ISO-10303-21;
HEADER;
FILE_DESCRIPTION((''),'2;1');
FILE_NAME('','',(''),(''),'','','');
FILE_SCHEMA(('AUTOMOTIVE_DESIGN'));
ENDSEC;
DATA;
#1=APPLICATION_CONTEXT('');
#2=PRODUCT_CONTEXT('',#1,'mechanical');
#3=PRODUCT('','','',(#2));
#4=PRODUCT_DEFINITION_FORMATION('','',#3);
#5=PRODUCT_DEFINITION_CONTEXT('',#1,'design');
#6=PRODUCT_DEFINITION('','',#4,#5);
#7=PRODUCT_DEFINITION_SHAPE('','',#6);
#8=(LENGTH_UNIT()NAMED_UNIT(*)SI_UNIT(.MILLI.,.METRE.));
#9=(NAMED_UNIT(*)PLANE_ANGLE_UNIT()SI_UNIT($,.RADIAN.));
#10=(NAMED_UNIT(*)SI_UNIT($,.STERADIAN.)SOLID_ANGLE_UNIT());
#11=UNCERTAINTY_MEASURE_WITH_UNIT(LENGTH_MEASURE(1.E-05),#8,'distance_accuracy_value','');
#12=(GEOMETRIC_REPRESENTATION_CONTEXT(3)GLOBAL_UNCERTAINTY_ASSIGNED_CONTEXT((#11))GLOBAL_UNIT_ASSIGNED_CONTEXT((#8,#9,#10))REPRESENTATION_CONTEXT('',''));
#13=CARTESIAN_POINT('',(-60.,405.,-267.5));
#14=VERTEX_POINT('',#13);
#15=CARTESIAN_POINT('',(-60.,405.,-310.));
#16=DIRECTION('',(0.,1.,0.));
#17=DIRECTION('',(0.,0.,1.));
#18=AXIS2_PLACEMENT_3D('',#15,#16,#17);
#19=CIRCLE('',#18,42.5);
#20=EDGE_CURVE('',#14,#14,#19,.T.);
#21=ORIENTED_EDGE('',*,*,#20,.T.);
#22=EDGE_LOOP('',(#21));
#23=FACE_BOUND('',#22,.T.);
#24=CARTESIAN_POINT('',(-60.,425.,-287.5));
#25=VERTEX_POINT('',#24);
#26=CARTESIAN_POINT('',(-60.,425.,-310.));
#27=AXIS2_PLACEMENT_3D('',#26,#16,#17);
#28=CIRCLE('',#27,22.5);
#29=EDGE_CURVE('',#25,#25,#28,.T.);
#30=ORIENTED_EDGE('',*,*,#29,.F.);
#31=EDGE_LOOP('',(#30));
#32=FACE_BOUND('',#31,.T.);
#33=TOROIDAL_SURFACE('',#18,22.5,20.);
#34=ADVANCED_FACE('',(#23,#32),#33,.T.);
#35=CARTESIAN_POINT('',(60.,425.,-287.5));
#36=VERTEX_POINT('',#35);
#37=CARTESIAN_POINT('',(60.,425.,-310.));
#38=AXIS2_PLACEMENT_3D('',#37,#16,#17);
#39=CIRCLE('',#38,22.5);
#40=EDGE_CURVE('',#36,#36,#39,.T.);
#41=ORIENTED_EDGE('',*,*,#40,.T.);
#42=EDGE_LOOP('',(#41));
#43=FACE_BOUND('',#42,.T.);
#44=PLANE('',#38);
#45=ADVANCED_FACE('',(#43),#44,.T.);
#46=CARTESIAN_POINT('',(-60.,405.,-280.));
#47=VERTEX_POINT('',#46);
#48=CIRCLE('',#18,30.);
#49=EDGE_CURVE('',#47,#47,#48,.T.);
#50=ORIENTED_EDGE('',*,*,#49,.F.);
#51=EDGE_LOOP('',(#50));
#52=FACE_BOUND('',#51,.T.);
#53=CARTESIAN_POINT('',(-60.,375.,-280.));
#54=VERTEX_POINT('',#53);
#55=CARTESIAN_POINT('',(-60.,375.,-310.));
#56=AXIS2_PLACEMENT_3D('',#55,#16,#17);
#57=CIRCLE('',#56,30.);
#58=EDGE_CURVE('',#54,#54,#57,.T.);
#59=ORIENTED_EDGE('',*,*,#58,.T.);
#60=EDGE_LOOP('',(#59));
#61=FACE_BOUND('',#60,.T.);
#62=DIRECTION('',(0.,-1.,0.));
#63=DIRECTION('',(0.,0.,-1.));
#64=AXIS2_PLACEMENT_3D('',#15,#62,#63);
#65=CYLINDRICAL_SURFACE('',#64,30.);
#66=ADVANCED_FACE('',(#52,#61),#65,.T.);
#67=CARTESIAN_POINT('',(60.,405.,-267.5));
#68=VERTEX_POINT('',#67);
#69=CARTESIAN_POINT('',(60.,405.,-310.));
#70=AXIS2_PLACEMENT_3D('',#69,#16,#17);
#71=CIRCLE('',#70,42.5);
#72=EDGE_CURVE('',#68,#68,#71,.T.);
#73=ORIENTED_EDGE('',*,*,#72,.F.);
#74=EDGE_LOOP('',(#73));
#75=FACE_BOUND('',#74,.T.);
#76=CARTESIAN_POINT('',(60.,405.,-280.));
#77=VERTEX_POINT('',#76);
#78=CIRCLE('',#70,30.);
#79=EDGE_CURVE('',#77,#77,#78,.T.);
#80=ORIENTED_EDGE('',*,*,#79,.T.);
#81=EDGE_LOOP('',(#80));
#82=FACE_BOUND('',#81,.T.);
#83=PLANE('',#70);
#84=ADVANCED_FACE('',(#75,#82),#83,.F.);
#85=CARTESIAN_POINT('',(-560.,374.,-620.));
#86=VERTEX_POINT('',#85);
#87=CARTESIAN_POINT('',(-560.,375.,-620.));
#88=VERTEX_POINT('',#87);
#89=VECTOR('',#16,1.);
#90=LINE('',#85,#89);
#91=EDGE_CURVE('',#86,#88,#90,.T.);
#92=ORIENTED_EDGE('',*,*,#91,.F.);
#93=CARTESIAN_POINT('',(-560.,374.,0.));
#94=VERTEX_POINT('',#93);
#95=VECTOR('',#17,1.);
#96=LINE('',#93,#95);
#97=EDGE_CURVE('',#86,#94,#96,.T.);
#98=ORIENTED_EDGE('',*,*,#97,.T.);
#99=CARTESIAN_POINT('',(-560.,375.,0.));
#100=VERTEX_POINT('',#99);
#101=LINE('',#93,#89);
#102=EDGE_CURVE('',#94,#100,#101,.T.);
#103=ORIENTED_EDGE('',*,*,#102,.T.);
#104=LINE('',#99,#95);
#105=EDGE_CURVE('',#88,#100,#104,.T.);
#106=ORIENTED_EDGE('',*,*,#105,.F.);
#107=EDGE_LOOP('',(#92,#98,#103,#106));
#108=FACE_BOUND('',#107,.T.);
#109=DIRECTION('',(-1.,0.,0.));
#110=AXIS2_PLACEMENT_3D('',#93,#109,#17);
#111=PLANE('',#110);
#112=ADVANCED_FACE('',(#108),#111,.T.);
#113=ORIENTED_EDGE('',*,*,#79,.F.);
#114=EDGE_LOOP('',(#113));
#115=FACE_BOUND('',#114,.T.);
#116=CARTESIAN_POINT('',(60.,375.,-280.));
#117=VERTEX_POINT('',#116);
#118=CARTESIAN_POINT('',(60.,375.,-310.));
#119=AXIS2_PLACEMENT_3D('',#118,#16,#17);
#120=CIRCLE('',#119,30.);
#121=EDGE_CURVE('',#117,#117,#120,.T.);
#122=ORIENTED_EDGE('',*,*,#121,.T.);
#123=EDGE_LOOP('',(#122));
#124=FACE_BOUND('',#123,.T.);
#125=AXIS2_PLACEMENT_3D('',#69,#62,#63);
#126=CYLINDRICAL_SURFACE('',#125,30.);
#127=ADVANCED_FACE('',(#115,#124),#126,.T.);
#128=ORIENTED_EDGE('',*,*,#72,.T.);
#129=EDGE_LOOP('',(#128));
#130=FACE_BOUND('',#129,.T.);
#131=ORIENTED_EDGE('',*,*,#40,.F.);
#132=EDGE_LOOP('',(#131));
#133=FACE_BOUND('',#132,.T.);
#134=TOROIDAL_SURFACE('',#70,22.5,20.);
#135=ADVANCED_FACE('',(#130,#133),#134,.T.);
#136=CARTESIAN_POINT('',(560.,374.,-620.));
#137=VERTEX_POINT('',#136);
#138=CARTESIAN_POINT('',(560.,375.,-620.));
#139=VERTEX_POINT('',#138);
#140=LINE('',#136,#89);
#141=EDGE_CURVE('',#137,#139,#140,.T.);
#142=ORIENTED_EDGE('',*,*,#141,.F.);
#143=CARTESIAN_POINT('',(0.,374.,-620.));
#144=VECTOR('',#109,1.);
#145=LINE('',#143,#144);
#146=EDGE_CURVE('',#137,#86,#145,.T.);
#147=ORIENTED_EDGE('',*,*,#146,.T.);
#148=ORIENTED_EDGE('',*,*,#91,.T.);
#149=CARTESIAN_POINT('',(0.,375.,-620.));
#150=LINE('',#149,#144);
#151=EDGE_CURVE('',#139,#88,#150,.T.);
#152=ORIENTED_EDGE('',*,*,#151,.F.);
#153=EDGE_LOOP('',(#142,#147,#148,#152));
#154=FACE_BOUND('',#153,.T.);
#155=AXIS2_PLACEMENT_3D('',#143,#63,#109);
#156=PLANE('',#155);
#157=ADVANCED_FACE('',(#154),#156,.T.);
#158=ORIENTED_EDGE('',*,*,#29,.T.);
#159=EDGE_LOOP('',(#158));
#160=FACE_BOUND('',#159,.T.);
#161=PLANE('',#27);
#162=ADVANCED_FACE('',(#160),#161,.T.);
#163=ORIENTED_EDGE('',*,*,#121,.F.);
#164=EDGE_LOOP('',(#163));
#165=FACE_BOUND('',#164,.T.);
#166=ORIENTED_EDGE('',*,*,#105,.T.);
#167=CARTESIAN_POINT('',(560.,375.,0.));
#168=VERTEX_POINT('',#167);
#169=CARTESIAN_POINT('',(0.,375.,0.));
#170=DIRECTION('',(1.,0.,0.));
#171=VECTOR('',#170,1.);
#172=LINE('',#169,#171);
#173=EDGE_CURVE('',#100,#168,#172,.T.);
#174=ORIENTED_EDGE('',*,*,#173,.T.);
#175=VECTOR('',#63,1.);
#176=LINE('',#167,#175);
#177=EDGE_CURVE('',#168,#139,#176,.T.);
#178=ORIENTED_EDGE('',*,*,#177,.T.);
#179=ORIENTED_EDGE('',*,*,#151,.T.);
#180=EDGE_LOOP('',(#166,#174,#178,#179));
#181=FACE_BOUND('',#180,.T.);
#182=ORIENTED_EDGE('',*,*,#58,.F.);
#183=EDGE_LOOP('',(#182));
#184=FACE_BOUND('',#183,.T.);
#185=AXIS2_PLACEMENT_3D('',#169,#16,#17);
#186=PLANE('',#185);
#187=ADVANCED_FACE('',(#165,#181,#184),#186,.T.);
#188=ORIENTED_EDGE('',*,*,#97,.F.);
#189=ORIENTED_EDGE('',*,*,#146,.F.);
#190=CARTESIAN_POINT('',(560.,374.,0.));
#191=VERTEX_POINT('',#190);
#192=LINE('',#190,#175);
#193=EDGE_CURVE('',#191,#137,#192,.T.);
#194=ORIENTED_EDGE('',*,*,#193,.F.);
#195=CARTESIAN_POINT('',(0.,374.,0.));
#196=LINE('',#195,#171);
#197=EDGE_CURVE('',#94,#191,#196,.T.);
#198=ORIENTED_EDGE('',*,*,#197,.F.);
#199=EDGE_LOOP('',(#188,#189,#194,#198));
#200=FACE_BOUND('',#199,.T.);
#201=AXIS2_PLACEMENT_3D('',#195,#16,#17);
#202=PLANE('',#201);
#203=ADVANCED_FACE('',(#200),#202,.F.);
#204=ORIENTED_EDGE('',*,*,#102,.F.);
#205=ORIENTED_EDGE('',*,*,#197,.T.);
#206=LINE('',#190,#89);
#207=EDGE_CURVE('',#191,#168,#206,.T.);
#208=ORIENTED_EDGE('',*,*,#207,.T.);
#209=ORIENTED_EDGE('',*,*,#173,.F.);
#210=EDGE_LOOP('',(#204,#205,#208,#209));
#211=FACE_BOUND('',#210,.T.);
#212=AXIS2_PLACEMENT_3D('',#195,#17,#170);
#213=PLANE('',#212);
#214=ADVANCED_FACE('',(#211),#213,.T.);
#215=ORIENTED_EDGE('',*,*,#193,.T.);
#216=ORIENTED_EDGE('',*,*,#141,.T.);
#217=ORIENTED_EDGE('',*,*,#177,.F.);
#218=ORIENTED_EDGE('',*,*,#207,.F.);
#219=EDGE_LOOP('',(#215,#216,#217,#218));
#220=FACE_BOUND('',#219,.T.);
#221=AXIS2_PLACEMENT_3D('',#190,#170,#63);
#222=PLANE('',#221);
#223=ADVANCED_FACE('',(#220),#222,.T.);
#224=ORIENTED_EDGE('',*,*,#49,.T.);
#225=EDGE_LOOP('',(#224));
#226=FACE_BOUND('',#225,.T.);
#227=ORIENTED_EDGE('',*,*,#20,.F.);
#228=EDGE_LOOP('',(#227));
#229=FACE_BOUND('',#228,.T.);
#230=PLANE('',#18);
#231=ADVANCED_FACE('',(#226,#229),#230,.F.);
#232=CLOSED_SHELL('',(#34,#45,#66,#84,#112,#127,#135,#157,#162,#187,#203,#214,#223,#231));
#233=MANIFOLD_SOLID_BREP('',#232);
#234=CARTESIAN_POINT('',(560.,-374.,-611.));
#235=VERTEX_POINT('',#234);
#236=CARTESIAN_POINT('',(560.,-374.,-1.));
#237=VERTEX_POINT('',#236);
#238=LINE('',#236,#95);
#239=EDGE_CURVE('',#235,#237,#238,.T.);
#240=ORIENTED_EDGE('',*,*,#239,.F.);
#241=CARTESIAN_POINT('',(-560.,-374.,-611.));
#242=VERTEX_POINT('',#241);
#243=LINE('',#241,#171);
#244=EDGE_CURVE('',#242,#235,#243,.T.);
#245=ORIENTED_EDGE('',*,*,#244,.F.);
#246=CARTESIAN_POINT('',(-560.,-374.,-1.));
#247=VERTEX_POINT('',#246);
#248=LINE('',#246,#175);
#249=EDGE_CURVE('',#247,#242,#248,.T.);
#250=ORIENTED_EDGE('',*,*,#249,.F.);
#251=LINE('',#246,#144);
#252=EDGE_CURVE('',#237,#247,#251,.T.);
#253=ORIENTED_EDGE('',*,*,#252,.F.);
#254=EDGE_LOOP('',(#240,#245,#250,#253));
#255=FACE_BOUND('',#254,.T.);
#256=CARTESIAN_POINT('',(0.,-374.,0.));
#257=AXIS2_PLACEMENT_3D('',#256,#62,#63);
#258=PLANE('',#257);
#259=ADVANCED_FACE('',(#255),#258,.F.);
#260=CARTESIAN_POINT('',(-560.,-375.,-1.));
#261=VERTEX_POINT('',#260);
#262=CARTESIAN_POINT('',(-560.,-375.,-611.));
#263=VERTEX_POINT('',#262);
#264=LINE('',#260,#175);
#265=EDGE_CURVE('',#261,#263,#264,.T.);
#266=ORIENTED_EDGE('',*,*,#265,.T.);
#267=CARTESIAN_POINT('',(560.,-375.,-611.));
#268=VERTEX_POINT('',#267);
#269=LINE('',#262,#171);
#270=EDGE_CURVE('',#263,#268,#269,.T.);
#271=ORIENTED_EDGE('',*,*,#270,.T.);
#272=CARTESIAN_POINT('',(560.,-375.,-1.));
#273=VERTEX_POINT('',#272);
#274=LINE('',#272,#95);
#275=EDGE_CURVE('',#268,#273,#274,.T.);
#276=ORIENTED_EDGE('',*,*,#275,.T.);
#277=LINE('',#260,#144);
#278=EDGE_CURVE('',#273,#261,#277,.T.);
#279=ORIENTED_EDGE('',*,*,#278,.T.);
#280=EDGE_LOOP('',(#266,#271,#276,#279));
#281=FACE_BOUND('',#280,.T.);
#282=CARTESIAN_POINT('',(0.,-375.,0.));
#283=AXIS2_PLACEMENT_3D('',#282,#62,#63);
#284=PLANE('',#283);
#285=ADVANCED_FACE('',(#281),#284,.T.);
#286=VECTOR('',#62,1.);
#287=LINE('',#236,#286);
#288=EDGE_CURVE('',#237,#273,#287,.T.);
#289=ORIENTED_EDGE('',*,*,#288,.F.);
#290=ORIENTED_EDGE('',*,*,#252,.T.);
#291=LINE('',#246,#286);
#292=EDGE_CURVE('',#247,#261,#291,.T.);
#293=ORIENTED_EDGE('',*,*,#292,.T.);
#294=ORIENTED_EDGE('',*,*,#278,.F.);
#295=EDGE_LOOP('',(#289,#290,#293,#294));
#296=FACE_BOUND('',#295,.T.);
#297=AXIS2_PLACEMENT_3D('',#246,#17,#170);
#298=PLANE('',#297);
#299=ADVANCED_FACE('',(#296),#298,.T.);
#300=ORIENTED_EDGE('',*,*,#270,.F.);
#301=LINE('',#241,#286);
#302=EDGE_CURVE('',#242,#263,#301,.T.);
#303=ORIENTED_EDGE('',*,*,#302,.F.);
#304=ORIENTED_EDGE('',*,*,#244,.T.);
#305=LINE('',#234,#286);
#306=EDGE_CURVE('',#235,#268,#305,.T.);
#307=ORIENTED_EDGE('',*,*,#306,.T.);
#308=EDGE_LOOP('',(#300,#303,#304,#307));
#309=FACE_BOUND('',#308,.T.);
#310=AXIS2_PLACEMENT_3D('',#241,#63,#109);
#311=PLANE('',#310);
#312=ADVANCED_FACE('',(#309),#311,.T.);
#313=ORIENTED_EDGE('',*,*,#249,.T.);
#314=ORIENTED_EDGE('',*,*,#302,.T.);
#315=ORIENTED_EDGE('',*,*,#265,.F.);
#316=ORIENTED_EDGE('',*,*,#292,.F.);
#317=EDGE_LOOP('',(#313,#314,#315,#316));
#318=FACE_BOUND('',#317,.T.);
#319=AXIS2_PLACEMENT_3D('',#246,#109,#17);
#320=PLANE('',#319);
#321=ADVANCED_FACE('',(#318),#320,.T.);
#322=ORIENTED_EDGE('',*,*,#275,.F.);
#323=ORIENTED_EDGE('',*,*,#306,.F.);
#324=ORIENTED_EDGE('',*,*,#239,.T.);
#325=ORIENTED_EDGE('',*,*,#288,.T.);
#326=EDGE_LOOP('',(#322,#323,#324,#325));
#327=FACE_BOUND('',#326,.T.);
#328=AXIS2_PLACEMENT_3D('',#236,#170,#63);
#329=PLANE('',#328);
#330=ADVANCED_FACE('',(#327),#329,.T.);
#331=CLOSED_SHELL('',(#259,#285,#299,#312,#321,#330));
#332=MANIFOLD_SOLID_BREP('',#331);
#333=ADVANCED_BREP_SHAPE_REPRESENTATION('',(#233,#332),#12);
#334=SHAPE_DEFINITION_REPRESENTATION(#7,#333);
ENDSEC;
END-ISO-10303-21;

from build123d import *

# Parameters (mm, degrees)
SKETCH2_W           = 1120
SKETCH2_H           = 610
BASE_FLANGE1_DEPTH  = 1
SKETCH8_W           = 560
SKETCH8_H           = 620
BASE_FLANGE2_DEPTH  = 1
SKETCH11_W          = 560
SKETCH11_H          = 620
BASE_FLANGE3_DEPTH  = 1
SKETCH14_R          = 30
BOSS_EXTRUDE1_DEPTH = 30
SKETCH17_R          = 42.5
BOSS_EXTRUDE2_DEPTH = 20
FILLET1_R           = 20


# Sheet-metal steps are written as plain solids
with BuildPart() as part:
    # Sketch2 → Base-Flange1 (new body)
    with BuildSketch(Plane.XZ.offset(375)):
        with Locations((0, -306)):
            Rectangle(SKETCH2_W, SKETCH2_H)
    extrude(amount=-BASE_FLANGE1_DEPTH)


with BuildPart() as body_2:
    # Sketch8 → Base-Flange2 (new body)
    with BuildSketch(Plane(origin=(0, 375, 0), x_dir=(1, 0, 0), z_dir=(0, 1, 0))):
        with Locations((-280, 310)):
            Rectangle(SKETCH8_W, SKETCH8_H)
    extrude(amount=-BASE_FLANGE2_DEPTH)



with BuildPart() as body_3:
    # Sketch11 → Base-Flange3 (new body)
    with BuildSketch(Plane(origin=(0, 375, 0), x_dir=(1, 0, 0), z_dir=(0, 1, 0))):
        with Locations((280, 310)):
            Rectangle(SKETCH11_W, SKETCH11_H)
    extrude(amount=-BASE_FLANGE3_DEPTH)


with BuildPart() as body_2_1:
    add(body_2.part)

    add(body_3.part)  # Boss-Extrude1 merges body 3
    # Sketch14 → Boss-Extrude1 (add)
    with BuildSketch(Plane(origin=(0, 375, 0), x_dir=(1, 0, 0), z_dir=(0, 1, 0))):
        with Locations(Location((-60, 310, 0), (0, 0, 270))):
            Circle(SKETCH14_R)
        with Locations(Location((60, 310, 0), (0, 0, 270))):
            Circle(SKETCH14_R)
    extrude(amount=BOSS_EXTRUDE1_DEPTH)

    # Sketch17 → Boss-Extrude2 (add)
    with BuildSketch(Plane(origin=(0, 405, 0), x_dir=(1, 0, 0), z_dir=(0, 1, 0))):
        with Locations(Location((-60, 310, 0), (0, 0, 270))):
            Circle(SKETCH17_R)
        with Locations(Location((60, 310, 0), (0, 0, 270))):
            Circle(SKETCH17_R)
    extrude(amount=BOSS_EXTRUDE2_DEPTH)

    # Fillet1
    fillet1_edges = [body_2_1.edges().sort_by_distance(p)[0] for p in [
        (-60, 425, -352.5),
        (60, 425, -352.5),
    ]]
    fillet(fillet1_edges, radius=FILLET1_R - 0.0001)  # a hair under: the kernel refuses the full size


solid = Compound([part.part, body_2_1.part])
